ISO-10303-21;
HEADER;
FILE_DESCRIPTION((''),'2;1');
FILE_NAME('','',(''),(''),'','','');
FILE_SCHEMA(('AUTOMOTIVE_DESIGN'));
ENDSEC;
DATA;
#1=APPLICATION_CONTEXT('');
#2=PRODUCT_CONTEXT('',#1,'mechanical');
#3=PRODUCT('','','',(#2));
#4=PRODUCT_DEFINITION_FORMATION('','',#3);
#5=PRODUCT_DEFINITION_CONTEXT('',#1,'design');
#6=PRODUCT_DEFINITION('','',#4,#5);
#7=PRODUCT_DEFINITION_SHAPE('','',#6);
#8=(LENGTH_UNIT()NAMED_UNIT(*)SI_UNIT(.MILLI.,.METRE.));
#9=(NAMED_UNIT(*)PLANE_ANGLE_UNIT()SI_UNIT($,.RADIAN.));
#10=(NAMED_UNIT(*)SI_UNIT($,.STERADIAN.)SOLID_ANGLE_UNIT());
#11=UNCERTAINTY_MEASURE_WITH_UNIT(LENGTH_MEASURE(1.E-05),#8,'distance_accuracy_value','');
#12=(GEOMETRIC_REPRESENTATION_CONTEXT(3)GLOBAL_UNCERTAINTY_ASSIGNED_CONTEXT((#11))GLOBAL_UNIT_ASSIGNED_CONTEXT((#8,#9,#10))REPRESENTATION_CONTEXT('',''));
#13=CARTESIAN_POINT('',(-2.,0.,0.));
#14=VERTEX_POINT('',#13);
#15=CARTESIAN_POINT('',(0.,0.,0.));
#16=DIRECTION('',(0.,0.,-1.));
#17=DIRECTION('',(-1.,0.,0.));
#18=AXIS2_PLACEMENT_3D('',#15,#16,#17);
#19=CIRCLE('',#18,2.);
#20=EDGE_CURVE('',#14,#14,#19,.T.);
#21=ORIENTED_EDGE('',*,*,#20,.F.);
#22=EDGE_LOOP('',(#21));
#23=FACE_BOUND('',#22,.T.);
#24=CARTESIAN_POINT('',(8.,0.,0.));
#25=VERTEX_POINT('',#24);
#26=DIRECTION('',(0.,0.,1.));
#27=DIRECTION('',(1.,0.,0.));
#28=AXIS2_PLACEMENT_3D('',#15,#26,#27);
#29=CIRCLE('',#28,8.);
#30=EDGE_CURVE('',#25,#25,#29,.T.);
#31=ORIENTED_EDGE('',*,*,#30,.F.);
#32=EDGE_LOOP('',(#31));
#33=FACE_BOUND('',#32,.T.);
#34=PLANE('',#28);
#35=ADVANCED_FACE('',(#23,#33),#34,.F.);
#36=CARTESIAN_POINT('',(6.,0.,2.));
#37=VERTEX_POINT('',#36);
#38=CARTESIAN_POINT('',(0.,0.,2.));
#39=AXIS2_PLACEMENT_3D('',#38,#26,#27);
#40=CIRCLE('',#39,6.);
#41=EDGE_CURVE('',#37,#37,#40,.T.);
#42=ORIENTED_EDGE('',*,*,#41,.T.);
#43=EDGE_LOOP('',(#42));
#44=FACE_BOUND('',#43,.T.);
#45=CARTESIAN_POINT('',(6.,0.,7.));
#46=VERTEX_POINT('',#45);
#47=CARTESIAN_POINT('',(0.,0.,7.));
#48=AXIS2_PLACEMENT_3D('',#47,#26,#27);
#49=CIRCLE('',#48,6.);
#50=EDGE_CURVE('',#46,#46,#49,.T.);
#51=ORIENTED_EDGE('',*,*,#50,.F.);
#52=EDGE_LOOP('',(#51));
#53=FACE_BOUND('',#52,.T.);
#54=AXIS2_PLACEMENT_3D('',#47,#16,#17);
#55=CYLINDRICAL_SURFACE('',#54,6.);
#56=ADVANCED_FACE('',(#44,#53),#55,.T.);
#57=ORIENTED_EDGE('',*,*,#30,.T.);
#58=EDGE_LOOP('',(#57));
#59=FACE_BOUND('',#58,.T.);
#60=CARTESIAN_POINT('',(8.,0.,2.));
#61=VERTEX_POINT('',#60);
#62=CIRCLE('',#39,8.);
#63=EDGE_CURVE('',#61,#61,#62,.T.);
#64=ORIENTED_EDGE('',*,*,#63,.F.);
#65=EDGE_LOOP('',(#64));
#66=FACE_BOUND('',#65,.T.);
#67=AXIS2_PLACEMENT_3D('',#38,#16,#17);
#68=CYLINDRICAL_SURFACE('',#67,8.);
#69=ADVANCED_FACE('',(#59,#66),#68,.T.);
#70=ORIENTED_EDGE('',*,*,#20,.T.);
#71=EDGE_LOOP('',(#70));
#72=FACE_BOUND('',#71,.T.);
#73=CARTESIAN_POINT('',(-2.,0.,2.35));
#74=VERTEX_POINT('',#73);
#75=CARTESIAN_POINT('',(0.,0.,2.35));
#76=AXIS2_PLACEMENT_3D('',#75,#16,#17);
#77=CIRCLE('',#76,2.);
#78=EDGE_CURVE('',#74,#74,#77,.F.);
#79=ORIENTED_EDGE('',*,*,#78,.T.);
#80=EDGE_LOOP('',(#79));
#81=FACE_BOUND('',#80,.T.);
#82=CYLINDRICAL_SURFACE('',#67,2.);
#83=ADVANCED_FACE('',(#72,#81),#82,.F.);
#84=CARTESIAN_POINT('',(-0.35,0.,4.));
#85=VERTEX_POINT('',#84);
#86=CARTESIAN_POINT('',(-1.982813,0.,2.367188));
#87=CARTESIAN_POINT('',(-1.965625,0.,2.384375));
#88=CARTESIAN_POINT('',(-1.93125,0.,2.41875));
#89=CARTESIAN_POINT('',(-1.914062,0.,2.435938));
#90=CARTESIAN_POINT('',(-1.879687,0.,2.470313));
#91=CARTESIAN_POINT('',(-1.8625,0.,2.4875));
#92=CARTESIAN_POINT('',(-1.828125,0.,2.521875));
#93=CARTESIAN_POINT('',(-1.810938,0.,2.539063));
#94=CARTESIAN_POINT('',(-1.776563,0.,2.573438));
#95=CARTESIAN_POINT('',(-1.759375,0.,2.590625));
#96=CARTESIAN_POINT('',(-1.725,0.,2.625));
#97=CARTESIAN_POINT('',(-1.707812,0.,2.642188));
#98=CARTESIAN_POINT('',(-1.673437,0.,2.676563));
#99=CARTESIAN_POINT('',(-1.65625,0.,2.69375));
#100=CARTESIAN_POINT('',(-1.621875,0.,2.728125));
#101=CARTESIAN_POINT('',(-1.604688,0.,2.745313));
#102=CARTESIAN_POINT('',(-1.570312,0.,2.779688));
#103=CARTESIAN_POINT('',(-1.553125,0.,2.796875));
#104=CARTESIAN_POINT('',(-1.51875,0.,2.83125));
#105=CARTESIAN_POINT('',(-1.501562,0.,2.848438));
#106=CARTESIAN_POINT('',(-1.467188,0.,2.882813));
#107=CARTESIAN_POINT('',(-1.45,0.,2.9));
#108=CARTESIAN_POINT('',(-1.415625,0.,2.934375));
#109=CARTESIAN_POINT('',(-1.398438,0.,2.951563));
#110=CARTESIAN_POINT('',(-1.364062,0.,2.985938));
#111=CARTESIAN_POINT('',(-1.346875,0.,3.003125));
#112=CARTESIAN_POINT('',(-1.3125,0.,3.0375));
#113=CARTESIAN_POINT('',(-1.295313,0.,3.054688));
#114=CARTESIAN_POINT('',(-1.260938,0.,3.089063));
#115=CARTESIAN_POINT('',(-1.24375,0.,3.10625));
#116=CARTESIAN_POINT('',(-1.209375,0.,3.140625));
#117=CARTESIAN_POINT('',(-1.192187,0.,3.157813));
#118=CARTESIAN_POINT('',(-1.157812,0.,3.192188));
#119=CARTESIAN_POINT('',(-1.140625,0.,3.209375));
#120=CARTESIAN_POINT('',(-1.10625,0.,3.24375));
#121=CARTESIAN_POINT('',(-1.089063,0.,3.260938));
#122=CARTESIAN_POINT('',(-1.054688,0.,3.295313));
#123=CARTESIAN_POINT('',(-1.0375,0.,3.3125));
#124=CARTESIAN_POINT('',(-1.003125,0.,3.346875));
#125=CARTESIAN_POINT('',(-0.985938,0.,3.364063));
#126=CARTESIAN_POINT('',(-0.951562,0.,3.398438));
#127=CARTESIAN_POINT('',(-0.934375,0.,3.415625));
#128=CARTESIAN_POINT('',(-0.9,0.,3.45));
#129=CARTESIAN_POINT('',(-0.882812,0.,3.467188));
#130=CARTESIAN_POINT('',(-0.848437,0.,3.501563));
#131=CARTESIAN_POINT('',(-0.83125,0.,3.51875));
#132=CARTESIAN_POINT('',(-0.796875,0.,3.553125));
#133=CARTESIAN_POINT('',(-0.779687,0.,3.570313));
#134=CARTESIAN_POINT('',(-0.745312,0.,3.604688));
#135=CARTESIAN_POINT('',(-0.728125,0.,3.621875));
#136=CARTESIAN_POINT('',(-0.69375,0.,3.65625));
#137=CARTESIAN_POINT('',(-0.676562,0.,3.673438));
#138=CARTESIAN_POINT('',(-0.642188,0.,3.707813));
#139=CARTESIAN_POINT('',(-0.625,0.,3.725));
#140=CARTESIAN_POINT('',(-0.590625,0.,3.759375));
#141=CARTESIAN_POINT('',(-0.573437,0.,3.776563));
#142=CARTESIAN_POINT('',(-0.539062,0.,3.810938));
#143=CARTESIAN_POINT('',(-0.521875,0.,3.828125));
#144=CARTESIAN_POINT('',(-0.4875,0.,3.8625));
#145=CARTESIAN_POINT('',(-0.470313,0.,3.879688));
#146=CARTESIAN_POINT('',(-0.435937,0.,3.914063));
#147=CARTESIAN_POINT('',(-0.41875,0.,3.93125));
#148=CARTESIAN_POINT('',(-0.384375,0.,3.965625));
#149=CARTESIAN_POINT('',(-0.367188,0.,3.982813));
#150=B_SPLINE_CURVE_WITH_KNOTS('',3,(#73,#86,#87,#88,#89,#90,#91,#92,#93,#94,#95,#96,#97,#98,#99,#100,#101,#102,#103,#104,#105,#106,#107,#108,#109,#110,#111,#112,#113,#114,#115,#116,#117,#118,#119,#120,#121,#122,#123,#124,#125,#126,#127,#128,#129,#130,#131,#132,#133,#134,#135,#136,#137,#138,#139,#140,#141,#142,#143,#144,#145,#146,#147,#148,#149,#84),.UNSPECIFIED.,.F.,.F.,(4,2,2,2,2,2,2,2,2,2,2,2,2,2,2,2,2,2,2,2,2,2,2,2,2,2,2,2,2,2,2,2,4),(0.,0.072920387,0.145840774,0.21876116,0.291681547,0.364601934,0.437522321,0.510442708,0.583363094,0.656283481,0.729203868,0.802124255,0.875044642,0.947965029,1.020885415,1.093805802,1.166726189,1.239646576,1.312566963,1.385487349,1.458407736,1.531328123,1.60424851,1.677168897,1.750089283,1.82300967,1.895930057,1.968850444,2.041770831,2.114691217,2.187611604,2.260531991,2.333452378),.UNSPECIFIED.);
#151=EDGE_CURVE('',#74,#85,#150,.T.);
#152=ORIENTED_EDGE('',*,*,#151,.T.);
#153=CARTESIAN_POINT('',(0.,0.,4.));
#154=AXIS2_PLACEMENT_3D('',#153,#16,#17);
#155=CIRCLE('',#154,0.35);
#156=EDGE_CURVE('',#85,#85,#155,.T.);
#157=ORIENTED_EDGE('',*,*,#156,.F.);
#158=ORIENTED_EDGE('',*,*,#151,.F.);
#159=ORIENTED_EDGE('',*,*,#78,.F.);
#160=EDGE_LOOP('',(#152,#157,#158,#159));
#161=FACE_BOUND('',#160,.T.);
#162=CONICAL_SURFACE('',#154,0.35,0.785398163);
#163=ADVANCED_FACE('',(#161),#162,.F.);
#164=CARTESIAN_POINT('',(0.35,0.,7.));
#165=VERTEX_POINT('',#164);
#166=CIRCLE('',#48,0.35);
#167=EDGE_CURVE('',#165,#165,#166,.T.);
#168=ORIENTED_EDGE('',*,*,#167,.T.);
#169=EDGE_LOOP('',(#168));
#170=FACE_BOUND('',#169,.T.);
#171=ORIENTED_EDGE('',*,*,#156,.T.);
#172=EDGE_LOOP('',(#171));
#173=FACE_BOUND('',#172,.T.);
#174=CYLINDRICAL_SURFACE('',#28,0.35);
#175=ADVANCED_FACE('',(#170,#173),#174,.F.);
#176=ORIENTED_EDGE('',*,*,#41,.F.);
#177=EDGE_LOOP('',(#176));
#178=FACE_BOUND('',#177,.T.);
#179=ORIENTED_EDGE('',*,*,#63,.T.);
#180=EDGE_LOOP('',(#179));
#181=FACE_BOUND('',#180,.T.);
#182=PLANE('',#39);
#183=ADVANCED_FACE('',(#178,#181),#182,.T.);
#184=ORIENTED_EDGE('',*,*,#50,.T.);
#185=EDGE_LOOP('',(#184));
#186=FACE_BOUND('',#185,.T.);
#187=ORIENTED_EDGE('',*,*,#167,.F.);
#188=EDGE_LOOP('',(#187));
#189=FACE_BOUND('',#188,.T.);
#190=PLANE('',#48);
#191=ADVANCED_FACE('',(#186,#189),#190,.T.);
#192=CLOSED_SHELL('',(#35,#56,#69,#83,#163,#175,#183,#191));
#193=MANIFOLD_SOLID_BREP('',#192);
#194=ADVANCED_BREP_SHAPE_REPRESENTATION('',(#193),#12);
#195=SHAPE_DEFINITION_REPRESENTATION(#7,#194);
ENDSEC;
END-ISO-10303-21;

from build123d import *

# Parameters (mm, degrees)
SKETCH1_R           = 8
BOSS_EXTRUDE1_DEPTH = 2
SKETCH2_R           = 6
BOSS_EXTRUDE2_DEPTH = 5
SKETCH3_R           = 2
CUT_EXTRUDE1_DEPTH  = 2
SKETCH4_R           = 0.35
CUT_EXTRUDE2_DEPTH  = 14.304134696
CHAMFER2_SIZE       = 2


with BuildPart() as part:
    # Sketch1 → Boss-Extrude1 (new body)
    with BuildSketch(Plane.XY):
        Circle(SKETCH1_R)
    extrude(amount=BOSS_EXTRUDE1_DEPTH)

    # Sketch2 → Boss-Extrude2 (add)
    with BuildSketch(Plane.XY.offset(2)):
        Circle(SKETCH2_R)
    extrude(amount=BOSS_EXTRUDE2_DEPTH)

    # Sketch3 → Cut-Extrude1 (cut)
    with BuildSketch(Plane(origin=(0, 0, 0), x_dir=(-1, 0, 0), z_dir=(0, 0, -1))):
        Circle(SKETCH3_R)
    extrude(amount=-CUT_EXTRUDE1_DEPTH, mode=Mode.SUBTRACT)

    # Sketch4 → Cut-Extrude2 (cut, through all)
    with BuildSketch(Plane.XY.offset(7)):
        Circle(SKETCH4_R)
    extrude(amount=-CUT_EXTRUDE2_DEPTH, mode=Mode.SUBTRACT)

    # Chamfer2
    # the kernel refuses this chamfer: 2 mm, written as the material it takes off along each edge
    with BuildSketch(Plane(origin=(0, 0, 2), x_dir=(1, 0, 0), z_dir=(0, -1, 0))) as chamfer2_piece_1_section:
        Polygon((0.35 + CHAMFER2_SIZE, 0), (0.35, CHAMFER2_SIZE), (0.35, 0), align=None)
    chamfer2_piece_1 = revolve(axis=Axis((0, 0, 2), (0, 0, 1)), mode=Mode.PRIVATE)
    chamfer2_piece_1 = chamfer2_piece_1 & Plane(origin=(0, 0, 3.186782056), x_dir=(-1, 0, 0), z_dir=(0, 0, -1)) * Cylinder(2, 10, mode=Mode.PRIVATE)
    add(chamfer2_piece_1, mode=Mode.SUBTRACT)


solid = part.part
